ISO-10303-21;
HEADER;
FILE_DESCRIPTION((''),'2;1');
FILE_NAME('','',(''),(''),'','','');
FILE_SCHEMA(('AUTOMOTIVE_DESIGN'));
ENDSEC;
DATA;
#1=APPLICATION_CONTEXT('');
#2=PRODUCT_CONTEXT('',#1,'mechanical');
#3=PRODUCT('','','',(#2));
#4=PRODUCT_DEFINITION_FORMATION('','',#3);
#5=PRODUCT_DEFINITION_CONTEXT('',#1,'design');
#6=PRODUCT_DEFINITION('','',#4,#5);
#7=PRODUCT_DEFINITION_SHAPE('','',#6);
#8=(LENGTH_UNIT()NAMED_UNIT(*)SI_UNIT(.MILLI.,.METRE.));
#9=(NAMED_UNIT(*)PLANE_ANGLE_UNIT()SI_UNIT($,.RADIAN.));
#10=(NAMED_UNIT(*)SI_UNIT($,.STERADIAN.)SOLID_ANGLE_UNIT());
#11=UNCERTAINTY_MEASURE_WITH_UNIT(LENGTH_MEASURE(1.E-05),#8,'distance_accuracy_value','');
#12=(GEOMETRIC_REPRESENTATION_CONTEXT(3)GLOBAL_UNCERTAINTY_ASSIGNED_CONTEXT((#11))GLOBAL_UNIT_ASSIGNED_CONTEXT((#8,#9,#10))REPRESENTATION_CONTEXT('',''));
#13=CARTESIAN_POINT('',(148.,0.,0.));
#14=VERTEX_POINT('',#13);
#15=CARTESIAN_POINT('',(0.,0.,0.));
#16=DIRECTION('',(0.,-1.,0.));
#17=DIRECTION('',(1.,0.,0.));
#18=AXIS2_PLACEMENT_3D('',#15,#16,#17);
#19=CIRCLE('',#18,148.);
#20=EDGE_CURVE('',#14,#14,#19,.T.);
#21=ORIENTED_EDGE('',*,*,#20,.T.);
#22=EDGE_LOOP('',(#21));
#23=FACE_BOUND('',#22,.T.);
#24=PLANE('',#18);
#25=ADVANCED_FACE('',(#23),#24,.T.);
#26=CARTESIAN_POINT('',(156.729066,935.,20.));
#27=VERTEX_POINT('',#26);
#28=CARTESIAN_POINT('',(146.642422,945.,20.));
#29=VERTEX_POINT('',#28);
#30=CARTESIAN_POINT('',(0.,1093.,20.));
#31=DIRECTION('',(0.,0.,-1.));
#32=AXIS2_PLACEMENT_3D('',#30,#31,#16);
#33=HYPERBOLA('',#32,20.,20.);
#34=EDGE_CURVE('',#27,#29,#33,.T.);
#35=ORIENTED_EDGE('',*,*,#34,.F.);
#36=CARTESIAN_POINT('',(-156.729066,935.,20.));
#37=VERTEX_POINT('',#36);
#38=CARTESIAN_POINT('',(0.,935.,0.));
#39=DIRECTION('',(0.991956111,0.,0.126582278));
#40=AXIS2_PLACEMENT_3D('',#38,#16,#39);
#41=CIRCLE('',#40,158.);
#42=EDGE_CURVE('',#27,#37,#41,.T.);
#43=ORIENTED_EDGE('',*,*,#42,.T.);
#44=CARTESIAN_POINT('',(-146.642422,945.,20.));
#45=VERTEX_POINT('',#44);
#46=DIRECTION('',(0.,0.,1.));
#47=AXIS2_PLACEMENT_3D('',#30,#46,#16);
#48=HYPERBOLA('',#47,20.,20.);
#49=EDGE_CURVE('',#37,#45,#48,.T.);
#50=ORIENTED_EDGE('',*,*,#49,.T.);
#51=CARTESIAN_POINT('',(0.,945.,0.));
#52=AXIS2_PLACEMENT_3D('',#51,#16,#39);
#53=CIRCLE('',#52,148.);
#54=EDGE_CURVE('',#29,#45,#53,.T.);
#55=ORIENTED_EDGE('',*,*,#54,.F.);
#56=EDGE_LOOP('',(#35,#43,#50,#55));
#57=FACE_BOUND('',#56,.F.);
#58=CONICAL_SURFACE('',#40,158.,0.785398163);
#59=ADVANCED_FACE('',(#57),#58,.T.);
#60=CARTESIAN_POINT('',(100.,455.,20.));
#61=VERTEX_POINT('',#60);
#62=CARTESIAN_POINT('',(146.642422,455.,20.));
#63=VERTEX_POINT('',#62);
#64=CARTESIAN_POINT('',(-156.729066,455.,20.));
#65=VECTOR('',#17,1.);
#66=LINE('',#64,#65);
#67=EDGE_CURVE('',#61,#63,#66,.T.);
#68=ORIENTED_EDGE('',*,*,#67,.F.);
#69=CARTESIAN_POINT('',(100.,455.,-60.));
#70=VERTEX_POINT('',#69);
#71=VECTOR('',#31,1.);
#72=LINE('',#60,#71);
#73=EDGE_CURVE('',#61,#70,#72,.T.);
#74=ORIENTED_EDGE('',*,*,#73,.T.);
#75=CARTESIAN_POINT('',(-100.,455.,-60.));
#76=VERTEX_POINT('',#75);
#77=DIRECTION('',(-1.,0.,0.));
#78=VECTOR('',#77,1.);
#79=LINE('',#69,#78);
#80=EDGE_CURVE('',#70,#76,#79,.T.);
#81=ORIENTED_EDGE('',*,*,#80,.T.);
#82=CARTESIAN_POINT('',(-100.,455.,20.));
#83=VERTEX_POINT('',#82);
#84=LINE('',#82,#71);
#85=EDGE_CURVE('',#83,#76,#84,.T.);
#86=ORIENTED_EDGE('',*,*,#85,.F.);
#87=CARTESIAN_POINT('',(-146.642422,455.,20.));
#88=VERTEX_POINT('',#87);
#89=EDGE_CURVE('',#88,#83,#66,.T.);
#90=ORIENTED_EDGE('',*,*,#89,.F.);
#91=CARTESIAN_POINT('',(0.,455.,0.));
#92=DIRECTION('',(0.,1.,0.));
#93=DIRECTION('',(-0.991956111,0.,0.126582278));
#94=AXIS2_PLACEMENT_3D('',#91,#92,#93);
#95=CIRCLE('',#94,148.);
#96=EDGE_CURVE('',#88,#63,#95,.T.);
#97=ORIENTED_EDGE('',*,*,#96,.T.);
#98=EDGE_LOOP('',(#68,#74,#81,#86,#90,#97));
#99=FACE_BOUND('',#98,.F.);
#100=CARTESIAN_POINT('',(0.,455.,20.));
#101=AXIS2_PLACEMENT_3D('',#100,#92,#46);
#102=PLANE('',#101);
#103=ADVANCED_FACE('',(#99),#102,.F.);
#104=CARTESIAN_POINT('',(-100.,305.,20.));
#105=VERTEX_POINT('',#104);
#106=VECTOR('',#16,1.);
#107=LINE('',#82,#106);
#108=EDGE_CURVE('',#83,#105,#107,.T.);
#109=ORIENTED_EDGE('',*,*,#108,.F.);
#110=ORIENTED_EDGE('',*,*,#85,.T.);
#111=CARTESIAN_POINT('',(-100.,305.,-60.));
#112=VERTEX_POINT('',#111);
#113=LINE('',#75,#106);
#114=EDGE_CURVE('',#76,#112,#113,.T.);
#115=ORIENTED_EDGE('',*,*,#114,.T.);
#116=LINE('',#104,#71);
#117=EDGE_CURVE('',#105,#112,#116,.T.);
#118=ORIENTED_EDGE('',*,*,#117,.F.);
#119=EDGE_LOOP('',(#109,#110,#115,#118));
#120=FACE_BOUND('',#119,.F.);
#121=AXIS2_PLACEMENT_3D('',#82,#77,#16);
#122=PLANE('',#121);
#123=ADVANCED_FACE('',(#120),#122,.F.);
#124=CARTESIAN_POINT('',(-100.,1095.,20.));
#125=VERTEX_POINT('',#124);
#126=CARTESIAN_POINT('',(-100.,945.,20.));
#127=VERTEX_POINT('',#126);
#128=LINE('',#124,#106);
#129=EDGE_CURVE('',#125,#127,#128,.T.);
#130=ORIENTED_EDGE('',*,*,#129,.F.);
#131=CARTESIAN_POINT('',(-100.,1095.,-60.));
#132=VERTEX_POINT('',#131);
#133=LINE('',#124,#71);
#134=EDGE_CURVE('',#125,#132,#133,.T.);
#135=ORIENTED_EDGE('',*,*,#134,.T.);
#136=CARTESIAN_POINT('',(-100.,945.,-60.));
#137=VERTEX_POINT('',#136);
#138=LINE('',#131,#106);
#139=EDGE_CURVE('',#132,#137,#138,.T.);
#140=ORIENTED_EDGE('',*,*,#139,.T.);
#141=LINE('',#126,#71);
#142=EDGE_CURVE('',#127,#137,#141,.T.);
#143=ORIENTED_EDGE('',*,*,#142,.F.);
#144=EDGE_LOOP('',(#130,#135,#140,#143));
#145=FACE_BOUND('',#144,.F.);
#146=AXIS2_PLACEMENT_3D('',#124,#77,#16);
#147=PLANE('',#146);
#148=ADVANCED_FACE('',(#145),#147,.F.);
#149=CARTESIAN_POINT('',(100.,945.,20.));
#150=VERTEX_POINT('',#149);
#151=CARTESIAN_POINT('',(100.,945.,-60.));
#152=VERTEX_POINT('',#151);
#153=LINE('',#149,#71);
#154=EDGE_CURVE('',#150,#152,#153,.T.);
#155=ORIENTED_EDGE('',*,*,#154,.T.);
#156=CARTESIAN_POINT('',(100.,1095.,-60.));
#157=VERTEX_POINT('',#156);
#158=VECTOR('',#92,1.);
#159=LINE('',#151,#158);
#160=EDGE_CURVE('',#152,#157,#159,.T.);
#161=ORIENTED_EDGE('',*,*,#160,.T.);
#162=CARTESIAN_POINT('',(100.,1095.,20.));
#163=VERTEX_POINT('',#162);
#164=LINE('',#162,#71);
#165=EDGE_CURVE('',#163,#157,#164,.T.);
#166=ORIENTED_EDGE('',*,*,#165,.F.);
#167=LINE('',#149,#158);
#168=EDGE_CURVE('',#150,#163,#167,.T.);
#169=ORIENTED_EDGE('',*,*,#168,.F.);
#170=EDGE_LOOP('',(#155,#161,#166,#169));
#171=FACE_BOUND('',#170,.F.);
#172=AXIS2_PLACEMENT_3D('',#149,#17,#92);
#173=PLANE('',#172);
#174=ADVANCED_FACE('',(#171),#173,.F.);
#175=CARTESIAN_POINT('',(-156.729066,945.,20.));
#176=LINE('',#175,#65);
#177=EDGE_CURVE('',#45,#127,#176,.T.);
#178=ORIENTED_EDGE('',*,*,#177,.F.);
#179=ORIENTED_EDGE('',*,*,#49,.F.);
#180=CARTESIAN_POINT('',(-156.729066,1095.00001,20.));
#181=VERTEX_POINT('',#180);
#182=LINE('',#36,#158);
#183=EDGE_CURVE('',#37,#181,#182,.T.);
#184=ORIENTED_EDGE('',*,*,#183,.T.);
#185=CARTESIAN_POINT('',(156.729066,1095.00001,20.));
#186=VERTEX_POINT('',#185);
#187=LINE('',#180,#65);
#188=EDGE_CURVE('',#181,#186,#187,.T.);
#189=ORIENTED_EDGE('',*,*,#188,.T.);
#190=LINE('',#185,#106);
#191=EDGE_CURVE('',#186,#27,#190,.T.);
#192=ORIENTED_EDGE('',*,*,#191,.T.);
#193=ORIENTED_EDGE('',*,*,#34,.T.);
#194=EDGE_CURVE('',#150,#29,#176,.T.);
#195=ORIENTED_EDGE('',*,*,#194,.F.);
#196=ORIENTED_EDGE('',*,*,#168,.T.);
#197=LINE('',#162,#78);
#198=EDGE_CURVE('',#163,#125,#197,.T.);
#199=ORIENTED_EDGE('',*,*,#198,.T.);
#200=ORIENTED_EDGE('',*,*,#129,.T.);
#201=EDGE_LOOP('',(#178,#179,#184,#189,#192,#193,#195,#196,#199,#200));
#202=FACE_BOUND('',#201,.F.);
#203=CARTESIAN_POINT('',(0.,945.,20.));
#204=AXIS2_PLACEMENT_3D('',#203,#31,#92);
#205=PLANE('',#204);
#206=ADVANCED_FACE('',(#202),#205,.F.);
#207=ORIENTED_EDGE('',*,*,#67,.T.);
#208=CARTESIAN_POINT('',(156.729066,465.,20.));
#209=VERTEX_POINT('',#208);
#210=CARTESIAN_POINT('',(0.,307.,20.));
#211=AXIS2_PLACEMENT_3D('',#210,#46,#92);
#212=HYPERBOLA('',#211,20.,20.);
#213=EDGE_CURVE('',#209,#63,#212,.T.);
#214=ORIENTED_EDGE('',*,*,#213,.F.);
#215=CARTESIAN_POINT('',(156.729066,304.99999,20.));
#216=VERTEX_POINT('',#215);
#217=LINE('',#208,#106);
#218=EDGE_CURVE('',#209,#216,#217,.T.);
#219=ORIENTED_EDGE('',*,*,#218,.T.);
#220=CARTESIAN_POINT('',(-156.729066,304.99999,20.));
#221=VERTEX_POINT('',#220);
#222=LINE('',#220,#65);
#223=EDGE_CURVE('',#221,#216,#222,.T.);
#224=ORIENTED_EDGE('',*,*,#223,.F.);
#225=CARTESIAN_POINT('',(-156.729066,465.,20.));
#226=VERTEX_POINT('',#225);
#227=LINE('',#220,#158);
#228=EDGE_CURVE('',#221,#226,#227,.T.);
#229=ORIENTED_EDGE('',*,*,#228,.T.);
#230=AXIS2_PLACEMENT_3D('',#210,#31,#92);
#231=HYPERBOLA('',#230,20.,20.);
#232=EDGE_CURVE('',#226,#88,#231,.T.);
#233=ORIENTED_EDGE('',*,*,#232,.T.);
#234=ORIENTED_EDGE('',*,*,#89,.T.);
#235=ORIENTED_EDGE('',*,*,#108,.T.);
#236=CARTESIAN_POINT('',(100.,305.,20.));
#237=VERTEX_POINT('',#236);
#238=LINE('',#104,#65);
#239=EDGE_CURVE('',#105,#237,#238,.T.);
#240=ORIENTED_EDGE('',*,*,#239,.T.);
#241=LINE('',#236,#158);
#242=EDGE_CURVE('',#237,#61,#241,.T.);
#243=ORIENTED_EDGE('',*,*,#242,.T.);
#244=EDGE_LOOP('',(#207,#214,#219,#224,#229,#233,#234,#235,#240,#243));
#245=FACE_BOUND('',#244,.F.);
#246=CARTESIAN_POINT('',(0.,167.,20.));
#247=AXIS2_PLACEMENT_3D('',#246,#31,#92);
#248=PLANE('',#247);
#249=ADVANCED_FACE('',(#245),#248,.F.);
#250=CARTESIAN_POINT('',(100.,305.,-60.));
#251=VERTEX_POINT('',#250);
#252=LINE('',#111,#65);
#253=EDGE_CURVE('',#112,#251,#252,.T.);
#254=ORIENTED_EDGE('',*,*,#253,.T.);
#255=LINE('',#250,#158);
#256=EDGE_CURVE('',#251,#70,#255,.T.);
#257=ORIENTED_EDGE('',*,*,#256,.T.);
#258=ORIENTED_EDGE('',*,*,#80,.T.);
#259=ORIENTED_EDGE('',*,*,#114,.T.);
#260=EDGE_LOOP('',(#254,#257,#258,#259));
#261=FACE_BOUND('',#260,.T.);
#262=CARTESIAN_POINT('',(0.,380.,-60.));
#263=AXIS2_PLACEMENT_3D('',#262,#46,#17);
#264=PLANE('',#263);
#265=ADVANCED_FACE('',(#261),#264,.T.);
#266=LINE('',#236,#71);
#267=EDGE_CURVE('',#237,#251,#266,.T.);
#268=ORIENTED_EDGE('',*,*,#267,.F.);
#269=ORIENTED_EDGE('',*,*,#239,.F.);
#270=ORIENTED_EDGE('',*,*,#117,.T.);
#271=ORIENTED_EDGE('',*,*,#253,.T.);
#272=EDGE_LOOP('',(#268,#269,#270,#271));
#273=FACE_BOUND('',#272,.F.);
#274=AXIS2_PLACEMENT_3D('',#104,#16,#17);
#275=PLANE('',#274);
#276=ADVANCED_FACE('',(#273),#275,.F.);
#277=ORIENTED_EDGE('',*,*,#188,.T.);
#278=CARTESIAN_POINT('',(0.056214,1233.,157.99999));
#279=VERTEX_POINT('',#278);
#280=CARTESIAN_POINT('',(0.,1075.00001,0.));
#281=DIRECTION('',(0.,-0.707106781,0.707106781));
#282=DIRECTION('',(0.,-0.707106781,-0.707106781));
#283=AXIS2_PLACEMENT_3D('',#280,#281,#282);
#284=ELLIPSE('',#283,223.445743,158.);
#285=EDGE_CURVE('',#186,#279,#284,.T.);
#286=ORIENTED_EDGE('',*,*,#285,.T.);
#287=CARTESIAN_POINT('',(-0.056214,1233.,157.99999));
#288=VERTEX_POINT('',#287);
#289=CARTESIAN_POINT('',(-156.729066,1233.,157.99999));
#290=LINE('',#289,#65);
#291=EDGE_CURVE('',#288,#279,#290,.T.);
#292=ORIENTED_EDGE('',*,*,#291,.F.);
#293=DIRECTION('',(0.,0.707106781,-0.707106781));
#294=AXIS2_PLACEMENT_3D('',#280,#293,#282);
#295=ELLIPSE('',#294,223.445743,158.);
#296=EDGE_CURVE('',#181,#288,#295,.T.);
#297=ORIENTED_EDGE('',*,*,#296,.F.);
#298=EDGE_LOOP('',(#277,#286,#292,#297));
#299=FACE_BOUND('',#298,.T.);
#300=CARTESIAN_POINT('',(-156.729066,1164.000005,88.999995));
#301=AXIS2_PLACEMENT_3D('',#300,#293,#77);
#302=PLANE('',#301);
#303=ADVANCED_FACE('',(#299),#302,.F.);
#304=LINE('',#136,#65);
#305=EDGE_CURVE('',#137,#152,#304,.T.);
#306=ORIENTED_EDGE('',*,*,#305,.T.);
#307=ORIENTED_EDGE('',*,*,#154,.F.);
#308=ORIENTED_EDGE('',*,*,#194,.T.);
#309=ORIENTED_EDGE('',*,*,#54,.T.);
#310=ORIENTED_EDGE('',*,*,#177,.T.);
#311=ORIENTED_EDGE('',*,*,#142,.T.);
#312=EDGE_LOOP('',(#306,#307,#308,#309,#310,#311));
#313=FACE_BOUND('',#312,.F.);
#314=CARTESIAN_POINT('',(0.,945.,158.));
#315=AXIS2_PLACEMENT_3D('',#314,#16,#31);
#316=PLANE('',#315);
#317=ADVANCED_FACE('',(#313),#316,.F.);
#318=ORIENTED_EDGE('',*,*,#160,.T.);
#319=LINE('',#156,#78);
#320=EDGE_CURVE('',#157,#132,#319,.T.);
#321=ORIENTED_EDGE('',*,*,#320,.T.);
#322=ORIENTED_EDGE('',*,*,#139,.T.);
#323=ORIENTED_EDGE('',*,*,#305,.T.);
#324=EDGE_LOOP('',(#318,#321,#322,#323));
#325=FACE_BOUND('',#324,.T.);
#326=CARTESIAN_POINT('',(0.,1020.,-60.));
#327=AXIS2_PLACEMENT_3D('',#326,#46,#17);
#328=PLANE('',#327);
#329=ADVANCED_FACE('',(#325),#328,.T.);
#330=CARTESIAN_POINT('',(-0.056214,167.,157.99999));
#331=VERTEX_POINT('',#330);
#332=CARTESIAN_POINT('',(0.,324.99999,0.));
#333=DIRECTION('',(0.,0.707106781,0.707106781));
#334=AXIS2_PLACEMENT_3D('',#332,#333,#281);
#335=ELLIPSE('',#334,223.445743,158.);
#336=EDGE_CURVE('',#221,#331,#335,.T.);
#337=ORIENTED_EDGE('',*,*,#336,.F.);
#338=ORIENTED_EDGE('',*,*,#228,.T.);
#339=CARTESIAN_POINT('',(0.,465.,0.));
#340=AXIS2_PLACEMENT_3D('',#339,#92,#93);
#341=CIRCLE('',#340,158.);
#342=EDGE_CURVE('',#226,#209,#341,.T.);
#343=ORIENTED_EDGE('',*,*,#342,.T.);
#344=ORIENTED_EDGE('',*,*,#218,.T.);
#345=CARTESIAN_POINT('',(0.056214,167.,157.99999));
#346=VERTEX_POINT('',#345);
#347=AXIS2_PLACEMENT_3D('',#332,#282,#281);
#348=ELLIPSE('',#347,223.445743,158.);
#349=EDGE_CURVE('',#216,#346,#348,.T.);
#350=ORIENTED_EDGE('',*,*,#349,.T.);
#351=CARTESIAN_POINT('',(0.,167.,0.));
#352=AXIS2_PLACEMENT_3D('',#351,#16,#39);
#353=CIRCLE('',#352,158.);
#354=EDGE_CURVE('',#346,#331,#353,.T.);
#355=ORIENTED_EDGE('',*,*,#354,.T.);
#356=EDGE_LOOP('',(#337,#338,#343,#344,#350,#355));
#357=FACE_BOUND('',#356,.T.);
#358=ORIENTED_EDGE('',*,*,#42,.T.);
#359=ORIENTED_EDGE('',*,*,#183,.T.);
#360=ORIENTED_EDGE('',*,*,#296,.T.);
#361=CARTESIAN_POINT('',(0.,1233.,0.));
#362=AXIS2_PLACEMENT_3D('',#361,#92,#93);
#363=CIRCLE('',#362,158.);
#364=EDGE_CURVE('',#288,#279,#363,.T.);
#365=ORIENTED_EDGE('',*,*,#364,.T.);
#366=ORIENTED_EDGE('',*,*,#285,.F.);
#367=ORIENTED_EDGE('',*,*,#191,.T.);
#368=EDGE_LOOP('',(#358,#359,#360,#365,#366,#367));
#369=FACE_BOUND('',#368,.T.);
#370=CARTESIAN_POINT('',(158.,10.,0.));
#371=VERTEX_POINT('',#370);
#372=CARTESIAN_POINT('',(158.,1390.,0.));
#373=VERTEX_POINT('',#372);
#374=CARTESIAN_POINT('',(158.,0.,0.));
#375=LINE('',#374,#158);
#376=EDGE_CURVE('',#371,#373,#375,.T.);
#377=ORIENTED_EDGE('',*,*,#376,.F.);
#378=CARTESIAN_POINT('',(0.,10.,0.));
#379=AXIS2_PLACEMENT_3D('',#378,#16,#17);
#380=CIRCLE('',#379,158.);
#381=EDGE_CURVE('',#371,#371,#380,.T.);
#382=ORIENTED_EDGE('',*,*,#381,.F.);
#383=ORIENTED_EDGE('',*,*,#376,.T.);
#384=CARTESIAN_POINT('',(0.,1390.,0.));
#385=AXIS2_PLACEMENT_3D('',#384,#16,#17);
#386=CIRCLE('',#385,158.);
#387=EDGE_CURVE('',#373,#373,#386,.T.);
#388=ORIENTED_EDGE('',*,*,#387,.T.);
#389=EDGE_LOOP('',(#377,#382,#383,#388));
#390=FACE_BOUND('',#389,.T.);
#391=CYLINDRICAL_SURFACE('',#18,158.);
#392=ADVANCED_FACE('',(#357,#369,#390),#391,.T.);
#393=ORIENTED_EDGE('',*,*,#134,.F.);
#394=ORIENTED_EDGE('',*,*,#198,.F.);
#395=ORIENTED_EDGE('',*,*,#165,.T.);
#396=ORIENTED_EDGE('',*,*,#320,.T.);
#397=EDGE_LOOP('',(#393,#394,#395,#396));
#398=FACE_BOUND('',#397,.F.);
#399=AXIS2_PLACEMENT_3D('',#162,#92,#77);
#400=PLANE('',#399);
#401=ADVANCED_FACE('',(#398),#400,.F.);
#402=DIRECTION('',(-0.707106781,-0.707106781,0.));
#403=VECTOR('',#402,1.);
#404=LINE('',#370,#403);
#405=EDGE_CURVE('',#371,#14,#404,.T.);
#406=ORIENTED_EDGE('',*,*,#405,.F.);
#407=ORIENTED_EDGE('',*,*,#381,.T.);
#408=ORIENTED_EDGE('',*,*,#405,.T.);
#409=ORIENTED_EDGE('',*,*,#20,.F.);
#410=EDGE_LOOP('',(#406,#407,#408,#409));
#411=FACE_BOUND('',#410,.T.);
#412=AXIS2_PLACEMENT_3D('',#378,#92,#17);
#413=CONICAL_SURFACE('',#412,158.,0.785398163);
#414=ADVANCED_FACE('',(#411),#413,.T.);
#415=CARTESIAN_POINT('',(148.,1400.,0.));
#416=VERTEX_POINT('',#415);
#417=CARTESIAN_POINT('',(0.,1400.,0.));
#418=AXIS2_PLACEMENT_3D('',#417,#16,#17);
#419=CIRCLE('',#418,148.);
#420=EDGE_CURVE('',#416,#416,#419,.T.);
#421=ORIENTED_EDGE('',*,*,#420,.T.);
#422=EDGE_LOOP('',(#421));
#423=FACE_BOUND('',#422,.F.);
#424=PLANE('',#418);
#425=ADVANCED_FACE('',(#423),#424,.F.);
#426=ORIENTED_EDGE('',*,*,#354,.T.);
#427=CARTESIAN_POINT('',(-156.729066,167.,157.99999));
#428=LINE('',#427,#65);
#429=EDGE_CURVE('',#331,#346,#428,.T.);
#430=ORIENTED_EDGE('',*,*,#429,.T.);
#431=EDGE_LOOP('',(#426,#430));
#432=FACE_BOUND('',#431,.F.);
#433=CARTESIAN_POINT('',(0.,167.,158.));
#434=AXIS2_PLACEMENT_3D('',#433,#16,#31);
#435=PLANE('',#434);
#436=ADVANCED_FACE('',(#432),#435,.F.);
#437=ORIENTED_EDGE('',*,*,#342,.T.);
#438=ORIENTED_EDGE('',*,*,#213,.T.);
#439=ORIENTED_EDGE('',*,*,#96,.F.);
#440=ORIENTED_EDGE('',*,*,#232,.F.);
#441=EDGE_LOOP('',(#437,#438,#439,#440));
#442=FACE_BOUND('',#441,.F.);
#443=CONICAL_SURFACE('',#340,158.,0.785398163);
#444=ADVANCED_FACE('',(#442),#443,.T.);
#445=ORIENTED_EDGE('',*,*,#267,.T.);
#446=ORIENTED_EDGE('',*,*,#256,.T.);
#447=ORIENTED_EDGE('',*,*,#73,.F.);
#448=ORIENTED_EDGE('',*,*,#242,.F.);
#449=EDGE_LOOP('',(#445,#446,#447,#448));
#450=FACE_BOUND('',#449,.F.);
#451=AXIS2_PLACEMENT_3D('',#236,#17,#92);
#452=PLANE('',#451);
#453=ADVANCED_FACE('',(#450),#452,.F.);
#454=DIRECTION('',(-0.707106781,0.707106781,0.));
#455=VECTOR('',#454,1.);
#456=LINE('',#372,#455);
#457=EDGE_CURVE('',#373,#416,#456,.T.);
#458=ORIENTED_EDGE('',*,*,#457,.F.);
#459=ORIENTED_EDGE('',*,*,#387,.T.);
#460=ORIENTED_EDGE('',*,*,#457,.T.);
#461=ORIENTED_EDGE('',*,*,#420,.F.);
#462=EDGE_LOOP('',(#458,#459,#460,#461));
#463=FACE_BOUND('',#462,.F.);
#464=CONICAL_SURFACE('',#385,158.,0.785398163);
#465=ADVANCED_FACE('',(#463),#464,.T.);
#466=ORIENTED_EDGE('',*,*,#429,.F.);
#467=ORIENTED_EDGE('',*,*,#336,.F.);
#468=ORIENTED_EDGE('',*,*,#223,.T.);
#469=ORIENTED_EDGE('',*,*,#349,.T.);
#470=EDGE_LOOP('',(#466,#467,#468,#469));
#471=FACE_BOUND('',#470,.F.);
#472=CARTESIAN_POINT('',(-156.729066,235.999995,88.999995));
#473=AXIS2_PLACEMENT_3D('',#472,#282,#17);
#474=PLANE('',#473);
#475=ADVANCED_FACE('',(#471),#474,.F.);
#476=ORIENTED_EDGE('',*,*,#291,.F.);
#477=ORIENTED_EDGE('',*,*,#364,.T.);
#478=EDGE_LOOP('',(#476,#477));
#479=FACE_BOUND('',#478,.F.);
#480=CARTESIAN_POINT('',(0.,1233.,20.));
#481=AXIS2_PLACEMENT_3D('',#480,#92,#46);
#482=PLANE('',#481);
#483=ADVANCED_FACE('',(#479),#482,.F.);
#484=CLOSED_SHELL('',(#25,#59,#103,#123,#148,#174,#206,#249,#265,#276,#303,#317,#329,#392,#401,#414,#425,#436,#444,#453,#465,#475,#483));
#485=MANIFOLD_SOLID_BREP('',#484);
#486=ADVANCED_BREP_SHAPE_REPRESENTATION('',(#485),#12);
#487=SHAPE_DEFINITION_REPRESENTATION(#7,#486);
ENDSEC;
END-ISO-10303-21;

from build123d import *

# Parameters (mm, degrees)
F0_R     = 158
F1_DEPTH = 1400
F3_DEPTH = 158.001
F4_DEPTH = 158.001
F5_SIZE  = 137.99999
F6_SIZE  = 137.99999
F9_DEPTH = 80
F10_SIZE = 10
F11_SIZE = 10


# Not quite as in the source:
# - a fillet or chamfer is up to 0.001 mm smaller than in the source, because OpenCascade refuses the exact size


with BuildPart() as f1:
    # F0 (on Front) → F1 (new body)
    with BuildSketch(Plane.XZ):
        Circle(F0_R)
    extrude(amount=-F1_DEPTH)

    # F2 (on Right) → F3 (cut, through all)
    with BuildSketch(Plane.YZ):
        Polygon((167, 20), (390, 20), (455, 20), (455, 158), (167, 158), align=None)
        Polygon((945, 158), (945, 20), (1010, 20), (1233, 20), (1233, 158), align=None)
    extrude(amount=-F3_DEPTH, mode=Mode.SUBTRACT)

    # F4 (cut, through all): faces of the model
    f4_faces = [f1.faces().sort_by_distance(p)[0] for p in [
        (0, 1089, 89),
        (0, 311, 89),
    ]]
    extrude(f4_faces, amount=-F4_DEPTH, mode=Mode.SUBTRACT)

    # F5 (size 138 in the source; OpenCascade refuses exactly that, so slightly less here)
    f5_edges = [f1.edges().sort_by_distance(p)[0] for p in [
        (0, 1233, 20),
    ]]
    chamfer(f5_edges, length=F5_SIZE)

    # F6 (size 138 in the source; OpenCascade refuses exactly that, so slightly less here)
    f6_edges = [f1.edges().sort_by_distance(p)[0] for p in [
        (0, 167, 20),
    ]]
    chamfer(f6_edges, length=F6_SIZE)

    # F7 (on face) + F8 (on face) → F9 (cut)
    with BuildSketch(Plane.XY.offset(20)):
        Polygon((100, 1095), (0, 1095), (-100, 1095), (-100, 945), (100, 945), align=None)
    with BuildSketch(Plane.XY.offset(20)):
        Polygon((-100, 305), (0, 305), (100, 305), (100, 455), (-100, 455), align=None)
    extrude(amount=-F9_DEPTH, mode=Mode.SUBTRACT)

    # F10
    f10_edges = [f1.edges().sort_by_distance(p)[0] for p in [
        (-158, 0, 0),
        (-158, 1400, 0),
    ]]
    chamfer(f10_edges, length=F10_SIZE)

    # F11
    f11_edges = [f1.edges().sort_by_distance(p)[0] for p in [
        (0, 455, 158),
        (0, 945, 158),
    ]]
    chamfer(f11_edges, length=F11_SIZE)


solid = f1.part
